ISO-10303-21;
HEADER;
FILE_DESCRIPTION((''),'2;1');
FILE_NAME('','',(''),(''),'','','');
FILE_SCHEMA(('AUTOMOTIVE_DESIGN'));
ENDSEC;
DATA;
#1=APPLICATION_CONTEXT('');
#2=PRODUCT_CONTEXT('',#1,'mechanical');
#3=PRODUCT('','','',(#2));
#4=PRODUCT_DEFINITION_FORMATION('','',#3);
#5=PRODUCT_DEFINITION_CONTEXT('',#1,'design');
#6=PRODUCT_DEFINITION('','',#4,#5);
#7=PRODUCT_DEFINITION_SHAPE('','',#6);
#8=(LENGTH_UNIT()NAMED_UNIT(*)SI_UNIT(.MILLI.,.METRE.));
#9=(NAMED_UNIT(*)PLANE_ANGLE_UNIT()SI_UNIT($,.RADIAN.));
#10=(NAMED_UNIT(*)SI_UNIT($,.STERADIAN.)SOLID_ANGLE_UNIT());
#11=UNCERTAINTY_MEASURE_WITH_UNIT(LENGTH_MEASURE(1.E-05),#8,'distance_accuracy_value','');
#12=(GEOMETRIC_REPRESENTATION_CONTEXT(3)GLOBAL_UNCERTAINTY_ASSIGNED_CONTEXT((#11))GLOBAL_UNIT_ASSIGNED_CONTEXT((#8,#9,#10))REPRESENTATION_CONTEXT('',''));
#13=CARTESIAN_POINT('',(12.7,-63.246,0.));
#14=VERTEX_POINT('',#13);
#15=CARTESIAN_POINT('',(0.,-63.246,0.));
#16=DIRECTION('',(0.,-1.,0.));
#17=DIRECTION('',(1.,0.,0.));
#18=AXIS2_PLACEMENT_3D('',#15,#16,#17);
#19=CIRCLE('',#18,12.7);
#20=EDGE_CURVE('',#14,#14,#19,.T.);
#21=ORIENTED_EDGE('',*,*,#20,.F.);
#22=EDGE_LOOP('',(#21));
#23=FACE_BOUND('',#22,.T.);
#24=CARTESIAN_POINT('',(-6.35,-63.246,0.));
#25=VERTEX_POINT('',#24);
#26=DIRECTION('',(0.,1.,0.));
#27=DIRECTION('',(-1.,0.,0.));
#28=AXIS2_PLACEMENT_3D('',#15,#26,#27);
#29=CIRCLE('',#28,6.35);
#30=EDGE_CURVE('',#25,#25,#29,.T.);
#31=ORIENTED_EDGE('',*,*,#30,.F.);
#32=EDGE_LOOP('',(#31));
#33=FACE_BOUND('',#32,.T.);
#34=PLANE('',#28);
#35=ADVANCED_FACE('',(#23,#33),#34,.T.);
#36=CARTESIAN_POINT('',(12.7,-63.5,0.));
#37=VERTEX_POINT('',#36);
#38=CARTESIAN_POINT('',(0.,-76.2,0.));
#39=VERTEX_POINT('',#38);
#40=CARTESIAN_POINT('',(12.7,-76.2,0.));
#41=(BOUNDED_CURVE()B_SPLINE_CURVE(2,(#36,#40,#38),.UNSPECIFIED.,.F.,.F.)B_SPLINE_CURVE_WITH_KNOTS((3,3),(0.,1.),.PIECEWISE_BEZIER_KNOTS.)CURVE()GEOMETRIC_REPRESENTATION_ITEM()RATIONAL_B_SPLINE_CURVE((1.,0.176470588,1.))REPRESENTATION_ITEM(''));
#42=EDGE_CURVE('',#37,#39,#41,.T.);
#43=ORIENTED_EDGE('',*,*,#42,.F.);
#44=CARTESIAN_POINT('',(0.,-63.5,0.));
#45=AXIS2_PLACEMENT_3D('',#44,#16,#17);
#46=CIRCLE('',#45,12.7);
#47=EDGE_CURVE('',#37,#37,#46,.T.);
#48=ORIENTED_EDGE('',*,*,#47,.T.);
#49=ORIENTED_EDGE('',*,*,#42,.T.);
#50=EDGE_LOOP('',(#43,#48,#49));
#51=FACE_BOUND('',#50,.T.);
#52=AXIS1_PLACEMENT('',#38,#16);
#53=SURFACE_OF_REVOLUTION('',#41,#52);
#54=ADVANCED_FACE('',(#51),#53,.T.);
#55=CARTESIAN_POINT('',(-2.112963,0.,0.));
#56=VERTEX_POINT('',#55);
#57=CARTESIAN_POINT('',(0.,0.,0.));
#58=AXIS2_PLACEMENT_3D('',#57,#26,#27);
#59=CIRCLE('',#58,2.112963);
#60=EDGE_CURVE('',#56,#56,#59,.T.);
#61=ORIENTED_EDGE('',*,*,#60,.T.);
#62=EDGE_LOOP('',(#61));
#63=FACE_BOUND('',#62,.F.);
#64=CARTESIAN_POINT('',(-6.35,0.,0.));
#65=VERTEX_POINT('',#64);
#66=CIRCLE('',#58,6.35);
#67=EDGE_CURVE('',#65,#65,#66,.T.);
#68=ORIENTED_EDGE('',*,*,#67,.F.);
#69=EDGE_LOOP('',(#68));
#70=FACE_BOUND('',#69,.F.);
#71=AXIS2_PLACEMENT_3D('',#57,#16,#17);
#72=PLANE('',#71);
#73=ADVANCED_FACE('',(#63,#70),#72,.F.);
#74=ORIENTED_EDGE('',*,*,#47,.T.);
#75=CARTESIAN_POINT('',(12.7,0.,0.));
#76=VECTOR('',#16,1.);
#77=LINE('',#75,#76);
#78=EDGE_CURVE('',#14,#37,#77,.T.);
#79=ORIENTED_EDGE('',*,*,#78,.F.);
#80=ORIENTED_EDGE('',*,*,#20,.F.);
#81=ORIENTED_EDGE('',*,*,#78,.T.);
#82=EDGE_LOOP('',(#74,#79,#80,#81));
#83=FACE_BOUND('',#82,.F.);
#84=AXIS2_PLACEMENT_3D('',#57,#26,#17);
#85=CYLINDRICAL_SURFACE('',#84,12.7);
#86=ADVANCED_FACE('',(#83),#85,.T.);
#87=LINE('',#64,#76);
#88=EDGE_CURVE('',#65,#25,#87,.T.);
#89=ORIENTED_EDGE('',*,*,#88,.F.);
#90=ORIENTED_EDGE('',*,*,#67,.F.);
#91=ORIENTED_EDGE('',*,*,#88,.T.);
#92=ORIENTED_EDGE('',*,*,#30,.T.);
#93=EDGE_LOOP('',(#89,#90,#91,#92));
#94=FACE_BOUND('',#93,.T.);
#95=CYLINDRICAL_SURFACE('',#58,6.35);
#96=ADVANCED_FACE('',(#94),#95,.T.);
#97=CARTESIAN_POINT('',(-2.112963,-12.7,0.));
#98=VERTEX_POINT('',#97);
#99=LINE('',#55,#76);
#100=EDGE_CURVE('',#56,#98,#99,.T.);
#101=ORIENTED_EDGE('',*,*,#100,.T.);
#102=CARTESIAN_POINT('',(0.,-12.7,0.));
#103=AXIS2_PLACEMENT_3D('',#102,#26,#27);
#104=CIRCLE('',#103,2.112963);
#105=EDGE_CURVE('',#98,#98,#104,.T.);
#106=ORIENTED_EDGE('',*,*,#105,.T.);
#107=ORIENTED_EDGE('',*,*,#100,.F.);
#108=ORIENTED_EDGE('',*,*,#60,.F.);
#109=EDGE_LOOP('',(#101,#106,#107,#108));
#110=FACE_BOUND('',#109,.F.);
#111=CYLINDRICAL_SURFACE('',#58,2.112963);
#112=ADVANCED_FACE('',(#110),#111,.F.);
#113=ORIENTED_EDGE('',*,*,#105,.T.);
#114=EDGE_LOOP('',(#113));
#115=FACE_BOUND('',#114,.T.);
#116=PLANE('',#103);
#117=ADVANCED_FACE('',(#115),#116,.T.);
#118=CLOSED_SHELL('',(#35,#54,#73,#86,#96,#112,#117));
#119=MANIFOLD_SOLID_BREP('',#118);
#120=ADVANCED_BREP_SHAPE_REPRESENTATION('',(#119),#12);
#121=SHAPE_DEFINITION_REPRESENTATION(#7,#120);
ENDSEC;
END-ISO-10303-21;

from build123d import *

# Parameters (mm, degrees)
F0_R     = 12.7
F1_DEPTH = 76.2
F3_R     = 12.7
F3_R_2   = 6.35
F4_DEPTH = 63.246
F5_R     = 2.1129626077
F6_DEPTH = 12.7


# Not quite as in the source:
# - a fillet or chamfer that OpenCascade refuses, or shapes differently, is made with other operations: its cross-section is extruded or revolved along the edge and cut away or added


with BuildPart() as f1:
    # F0 (on Front) → F1 (new body)
    with BuildSketch(Plane.XZ):
        Circle(F0_R)
    extrude(amount=F1_DEPTH)

    # F2: fillet of radius 12.7 on 1 edges, made by hand

    # F2_s1 → F2_t2 (revolve, cut)
    with BuildSketch(Plane.XY):
        with BuildLine():
            add(Edge.make_bspline(
                [(12.7, -63.5), (12.7, -76.2), (0, -76.2)],
                knots=[0, 0, 0, 1, 1, 1], degree=2, weights=[1, 0.1764705882, 1]))
            Line((0, -76.2), (12.7, -76.2))
            Line((12.7, -76.2), (12.7, -63.5))
        make_face()
    revolve(axis=Axis((0, -76.2, 0), (0, -1, 0)), mode=Mode.SUBTRACT)

    # F3 (on face) → F4 (cut)
    with BuildSketch(Plane(origin=(0, 0, 0), x_dir=(-1, 0, 0), z_dir=(0, 1, 0))):
        Circle(F3_R)
        Circle(F3_R_2, mode=Mode.SUBTRACT)
    extrude(amount=-F4_DEPTH, mode=Mode.SUBTRACT)

    # F5 (on face) → F6 (cut)
    with BuildSketch(Plane(origin=(0, 0, 0), x_dir=(-1, 0, 0), z_dir=(0, 1, 0))):
        Circle(F5_R)
    extrude(amount=-F6_DEPTH, mode=Mode.SUBTRACT)


solid = f1.part
